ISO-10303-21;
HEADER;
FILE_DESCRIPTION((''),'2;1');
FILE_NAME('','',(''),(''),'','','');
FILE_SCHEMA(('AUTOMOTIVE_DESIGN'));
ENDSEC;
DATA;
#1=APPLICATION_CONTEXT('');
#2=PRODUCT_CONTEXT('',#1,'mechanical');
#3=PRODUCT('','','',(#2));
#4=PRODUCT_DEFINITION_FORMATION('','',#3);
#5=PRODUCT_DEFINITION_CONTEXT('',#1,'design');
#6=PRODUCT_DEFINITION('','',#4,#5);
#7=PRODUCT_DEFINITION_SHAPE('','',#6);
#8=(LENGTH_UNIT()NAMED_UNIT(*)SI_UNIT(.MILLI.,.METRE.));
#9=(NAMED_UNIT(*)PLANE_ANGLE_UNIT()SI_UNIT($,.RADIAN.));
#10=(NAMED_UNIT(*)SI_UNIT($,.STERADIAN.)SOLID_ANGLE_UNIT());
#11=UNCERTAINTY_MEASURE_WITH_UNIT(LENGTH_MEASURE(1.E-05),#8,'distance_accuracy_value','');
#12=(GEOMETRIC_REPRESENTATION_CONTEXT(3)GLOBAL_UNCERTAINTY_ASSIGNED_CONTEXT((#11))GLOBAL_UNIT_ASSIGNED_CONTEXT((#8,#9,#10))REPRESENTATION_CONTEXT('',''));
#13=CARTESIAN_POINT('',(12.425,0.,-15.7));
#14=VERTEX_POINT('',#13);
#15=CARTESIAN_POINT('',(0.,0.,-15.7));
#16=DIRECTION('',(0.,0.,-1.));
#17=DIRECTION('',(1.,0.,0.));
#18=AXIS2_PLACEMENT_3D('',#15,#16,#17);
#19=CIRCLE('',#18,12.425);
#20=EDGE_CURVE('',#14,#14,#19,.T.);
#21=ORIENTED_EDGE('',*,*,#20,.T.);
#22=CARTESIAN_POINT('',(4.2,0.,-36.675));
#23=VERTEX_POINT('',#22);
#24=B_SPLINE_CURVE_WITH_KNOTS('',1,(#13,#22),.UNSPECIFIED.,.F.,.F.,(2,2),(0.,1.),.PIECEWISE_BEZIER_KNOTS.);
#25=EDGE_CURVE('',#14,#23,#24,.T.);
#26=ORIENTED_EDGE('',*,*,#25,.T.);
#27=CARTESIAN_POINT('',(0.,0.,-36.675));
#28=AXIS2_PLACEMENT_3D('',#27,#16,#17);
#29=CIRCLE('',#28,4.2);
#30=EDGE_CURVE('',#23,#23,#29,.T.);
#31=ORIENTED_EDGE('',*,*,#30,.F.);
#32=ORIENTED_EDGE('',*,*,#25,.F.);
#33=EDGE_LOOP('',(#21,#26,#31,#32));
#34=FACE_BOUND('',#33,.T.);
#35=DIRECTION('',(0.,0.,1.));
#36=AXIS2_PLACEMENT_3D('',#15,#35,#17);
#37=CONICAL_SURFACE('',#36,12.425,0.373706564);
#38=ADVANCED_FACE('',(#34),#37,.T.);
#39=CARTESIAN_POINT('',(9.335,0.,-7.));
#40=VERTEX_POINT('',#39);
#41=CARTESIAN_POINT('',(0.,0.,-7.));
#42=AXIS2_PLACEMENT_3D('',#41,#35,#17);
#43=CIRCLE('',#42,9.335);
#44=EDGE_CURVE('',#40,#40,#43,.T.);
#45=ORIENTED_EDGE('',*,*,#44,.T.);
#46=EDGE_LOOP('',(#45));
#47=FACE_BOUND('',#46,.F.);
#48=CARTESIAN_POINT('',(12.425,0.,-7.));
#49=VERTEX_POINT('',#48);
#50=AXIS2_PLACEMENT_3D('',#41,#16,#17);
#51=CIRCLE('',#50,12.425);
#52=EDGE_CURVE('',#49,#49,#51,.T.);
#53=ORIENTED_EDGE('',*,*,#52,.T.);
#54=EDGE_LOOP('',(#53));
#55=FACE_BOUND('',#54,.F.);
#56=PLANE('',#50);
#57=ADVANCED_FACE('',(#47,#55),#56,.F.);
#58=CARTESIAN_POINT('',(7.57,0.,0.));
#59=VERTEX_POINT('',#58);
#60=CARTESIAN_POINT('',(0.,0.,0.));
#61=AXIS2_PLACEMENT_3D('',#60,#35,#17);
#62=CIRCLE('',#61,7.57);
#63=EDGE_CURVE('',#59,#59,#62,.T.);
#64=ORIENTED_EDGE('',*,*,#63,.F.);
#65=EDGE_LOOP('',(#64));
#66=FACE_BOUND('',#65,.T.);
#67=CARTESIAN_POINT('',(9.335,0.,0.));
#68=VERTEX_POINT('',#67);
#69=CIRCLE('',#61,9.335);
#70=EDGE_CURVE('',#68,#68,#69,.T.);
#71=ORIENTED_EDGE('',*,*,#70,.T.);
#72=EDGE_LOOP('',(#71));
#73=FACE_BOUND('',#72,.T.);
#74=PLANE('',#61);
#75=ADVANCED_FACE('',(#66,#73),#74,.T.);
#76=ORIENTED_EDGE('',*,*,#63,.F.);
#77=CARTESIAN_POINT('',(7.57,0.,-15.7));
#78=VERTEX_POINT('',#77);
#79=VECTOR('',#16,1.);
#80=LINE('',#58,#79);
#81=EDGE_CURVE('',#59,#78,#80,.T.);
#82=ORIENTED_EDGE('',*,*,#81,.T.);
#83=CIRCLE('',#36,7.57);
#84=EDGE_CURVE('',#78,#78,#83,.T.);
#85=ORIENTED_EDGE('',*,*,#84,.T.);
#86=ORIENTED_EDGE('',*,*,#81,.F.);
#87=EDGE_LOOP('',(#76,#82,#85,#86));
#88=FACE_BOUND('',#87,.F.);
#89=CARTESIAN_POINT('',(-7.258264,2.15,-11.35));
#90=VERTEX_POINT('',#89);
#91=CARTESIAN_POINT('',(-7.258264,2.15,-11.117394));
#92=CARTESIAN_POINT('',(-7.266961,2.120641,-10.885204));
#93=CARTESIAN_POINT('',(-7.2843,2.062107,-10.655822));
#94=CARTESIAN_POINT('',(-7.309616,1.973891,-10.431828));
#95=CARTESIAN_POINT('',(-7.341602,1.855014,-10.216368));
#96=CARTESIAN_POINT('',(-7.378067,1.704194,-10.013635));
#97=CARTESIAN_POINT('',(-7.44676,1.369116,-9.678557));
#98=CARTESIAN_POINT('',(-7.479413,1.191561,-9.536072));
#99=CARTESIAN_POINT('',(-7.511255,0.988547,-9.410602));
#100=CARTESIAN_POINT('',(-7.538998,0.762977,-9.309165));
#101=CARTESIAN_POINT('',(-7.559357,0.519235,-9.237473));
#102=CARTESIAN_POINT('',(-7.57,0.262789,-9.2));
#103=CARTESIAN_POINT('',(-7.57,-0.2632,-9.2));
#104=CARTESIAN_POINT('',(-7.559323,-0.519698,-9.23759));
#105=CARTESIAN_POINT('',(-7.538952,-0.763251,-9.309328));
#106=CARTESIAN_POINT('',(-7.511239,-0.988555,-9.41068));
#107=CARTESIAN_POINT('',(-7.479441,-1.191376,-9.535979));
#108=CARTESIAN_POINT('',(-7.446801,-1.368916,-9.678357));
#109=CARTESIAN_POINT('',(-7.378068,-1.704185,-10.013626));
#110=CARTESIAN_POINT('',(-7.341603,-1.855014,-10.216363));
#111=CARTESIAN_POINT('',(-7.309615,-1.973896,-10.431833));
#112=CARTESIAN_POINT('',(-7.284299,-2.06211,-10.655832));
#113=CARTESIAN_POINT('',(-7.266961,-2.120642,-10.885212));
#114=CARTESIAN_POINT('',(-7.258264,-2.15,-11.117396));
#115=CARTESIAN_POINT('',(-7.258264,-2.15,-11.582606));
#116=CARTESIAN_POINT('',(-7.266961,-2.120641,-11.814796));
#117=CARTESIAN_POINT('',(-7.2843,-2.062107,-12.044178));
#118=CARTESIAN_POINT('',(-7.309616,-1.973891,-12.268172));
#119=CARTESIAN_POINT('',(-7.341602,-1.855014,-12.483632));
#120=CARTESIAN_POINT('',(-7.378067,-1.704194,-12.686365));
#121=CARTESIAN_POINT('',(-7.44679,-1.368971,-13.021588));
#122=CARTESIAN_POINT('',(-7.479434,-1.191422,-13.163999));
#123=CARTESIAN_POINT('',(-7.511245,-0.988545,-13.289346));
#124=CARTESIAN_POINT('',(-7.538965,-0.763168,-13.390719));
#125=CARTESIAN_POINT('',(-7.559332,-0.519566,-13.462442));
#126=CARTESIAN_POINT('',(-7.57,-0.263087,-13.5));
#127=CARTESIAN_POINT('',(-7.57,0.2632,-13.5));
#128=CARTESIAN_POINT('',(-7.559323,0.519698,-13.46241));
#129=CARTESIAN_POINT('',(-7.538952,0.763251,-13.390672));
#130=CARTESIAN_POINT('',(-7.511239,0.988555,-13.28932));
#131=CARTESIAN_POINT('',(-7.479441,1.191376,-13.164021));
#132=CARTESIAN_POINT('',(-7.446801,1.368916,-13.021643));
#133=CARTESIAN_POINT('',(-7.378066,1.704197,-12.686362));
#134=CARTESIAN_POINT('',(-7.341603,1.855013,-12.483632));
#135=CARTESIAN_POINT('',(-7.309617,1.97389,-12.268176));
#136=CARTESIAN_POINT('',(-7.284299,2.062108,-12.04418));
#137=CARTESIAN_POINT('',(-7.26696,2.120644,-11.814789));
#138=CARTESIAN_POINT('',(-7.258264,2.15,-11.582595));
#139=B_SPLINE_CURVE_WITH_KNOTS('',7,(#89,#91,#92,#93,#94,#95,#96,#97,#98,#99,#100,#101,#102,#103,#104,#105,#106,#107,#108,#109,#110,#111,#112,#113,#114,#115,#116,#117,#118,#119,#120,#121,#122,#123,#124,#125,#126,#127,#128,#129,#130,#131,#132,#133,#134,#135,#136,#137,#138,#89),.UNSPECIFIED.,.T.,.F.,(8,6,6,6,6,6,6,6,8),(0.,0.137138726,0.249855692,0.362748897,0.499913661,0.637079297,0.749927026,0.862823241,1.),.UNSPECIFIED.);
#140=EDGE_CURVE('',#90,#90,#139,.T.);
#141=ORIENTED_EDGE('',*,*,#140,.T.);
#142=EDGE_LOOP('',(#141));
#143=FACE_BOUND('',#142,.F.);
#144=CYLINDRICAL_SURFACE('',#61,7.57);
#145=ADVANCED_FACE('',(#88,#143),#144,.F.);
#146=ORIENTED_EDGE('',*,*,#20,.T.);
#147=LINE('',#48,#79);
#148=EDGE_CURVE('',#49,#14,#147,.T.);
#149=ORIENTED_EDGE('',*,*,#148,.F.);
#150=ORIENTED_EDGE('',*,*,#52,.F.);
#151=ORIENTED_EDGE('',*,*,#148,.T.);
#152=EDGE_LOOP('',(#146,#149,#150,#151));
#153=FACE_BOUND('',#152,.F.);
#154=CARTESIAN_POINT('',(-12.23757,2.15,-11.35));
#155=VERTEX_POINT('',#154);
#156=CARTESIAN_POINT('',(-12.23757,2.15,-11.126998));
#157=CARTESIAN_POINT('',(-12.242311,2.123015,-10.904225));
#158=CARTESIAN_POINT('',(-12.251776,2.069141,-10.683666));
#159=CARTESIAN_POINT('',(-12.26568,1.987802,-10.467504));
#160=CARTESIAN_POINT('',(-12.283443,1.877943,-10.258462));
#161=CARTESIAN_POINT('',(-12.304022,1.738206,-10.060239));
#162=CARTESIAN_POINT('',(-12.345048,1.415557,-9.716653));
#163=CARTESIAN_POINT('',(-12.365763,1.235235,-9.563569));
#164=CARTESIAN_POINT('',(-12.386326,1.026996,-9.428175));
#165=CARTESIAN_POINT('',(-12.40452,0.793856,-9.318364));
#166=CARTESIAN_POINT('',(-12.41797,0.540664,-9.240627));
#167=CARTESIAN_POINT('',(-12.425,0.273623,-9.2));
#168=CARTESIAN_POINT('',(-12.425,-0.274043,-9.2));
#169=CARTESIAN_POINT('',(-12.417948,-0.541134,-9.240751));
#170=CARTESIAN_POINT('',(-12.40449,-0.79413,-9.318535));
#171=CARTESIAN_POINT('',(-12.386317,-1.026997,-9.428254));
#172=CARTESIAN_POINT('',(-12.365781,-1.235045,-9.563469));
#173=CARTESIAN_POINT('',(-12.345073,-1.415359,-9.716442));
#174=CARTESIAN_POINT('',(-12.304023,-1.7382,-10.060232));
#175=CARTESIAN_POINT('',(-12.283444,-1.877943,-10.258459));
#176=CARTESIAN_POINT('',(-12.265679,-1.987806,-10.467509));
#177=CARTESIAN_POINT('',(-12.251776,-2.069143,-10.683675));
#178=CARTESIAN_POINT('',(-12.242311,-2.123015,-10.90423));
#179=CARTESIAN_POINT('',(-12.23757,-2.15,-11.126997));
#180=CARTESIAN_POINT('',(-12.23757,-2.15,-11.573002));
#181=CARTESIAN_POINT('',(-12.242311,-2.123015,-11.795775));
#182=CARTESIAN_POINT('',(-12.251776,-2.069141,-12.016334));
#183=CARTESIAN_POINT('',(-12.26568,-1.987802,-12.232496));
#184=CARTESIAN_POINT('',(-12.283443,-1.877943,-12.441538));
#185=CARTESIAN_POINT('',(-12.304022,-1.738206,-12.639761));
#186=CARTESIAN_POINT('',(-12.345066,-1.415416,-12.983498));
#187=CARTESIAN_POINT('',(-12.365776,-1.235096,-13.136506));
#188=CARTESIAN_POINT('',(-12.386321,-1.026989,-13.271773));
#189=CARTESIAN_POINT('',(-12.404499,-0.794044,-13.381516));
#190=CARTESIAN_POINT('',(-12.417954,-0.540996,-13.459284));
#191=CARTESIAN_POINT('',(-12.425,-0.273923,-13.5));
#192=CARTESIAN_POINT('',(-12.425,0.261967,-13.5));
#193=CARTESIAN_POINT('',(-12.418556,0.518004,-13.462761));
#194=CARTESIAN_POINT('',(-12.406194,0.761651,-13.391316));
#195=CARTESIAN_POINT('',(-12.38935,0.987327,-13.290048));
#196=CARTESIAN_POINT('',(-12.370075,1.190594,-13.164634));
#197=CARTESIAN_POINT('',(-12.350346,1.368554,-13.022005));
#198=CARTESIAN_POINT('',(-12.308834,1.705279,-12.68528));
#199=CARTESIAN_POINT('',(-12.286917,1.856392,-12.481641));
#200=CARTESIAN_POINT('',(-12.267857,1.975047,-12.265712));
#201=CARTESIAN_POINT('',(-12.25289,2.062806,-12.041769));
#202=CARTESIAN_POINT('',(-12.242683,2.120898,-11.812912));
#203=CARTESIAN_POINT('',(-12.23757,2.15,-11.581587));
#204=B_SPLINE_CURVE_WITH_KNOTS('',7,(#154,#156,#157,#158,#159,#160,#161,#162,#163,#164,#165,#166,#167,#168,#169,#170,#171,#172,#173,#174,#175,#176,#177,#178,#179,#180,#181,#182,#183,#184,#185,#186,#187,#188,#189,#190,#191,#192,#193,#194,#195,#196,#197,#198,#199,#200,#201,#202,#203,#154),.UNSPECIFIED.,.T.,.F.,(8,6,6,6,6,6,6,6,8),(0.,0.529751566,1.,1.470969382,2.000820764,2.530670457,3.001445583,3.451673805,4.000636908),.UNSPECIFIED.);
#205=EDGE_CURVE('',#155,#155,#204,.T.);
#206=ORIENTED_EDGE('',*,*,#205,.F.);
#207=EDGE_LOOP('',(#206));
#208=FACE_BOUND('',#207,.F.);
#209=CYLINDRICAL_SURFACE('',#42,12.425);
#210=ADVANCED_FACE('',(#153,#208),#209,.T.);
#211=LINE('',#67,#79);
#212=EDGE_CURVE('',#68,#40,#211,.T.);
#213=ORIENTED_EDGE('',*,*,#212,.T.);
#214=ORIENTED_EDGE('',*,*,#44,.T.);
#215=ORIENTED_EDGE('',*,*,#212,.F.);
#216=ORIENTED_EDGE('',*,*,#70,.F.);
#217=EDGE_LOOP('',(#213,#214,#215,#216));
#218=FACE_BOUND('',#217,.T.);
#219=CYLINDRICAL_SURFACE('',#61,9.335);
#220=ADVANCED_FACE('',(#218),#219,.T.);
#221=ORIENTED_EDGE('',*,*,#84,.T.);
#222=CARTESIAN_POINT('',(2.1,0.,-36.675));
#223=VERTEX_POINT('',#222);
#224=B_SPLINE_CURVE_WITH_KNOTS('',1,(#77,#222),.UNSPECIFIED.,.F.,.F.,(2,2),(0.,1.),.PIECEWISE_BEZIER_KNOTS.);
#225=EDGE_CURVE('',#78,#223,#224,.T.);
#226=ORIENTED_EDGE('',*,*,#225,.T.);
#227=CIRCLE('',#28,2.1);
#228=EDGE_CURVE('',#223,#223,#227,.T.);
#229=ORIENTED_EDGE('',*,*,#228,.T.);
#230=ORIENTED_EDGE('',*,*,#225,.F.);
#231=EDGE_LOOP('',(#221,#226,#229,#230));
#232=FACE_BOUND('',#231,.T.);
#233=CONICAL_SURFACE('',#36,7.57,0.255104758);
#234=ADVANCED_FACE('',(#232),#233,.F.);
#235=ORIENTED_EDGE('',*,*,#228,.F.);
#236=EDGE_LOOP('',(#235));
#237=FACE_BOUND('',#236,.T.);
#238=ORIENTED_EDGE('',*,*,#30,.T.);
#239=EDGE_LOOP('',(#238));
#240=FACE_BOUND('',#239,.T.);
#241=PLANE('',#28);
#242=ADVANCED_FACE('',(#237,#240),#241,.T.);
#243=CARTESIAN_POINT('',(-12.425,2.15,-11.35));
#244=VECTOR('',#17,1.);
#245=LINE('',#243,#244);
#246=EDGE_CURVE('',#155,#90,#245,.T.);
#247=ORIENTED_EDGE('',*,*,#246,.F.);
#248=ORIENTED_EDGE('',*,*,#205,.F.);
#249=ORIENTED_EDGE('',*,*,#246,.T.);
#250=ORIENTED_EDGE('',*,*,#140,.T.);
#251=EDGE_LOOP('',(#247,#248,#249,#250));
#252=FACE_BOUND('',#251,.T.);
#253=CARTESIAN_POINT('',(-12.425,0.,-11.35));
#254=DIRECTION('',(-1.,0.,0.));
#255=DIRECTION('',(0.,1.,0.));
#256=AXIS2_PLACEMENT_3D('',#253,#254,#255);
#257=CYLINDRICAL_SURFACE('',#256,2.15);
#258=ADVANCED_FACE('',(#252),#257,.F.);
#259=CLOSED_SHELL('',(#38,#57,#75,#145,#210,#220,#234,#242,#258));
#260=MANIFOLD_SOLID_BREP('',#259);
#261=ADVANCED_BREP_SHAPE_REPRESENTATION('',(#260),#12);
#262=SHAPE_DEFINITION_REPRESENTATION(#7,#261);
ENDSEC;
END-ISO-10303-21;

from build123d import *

# Parameters (mm, degrees)
F0_R      = 9.335
F1_DEPTH  = 7
F2_R      = 12.425
F2_R_2    = 9.335
F3_DEPTH  = 8.7
F3_FACE_R = 12.425
F5_R      = 4.2
F8_R      = 7.57
F10_DEPTH = 15.7
F11_R     = 7.57
F9_R      = 2.1
F13_R     = 2.15
F14_REACH = 30.9321184182


with BuildPart() as f1:
    # F0 (on Top) → F1 (new body)
    with BuildSketch(Plane.XY):
        Circle(F0_R)
    extrude(amount=-F1_DEPTH)

    # F2 (on face) → F3 (join)
    with BuildSketch(Plane(origin=(0, 0, -7), x_dir=(1, 0, 0), z_dir=(0, 0, -1))):
        Circle(F2_R)
        Circle(F2_R_2, mode=Mode.SUBTRACT)
        Circle(F2_R_2)
    extrude(amount=F3_DEPTH)

    # F3_face (on face) → F6 section 0
    with BuildSketch(Plane(origin=(0, 0, -15.7), x_dir=(1, 0, 0), z_dir=(0, 0, -1))):
        Circle(F3_FACE_R)
    # F5 (on offset) → F6 section 1
    with BuildSketch(Plane(origin=(0, 0, -36.675), x_dir=(1, 0, 0), z_dir=(0, 0, -1))):
        Circle(F5_R)
    loft()

    # F8 (on face) → F10 (cut)
    with BuildSketch(Plane.XY):
        Circle(F8_R)
    extrude(amount=-F10_DEPTH, mode=Mode.SUBTRACT)

    # F11 (on face) → F12 section 0
    with BuildSketch(Plane.XY.offset(-15.7)):
        Circle(F11_R)
    # F9 (on face) → F12 section 1
    with BuildSketch(Plane(origin=(0, 0, -36.675), x_dir=(1, 0, 0), z_dir=(0, 0, -1))):
        Circle(F9_R)
    loft(mode=Mode.SUBTRACT)

    f14_end = f1.faces().sort_by_distance((-7.57, 0, -7.85))[0]
    # F13 (on offset) → F14 (cut, up to a face of the model that its end follows)
    with BuildSketch(Plane.YZ.offset(-12.425)):
        with Locations((0, -11.35)):
            Circle(F13_R)
    f14_long = extrude(amount=F14_REACH, mode=Mode.PRIVATE)
    add(split(f14_long, bisect_by=f14_end, keep=Keep.ALL, mode=Mode.PRIVATE).solids().sort_by_distance((-12.425, 0, -11.35))[0], mode=Mode.SUBTRACT)


solid = f1.part
